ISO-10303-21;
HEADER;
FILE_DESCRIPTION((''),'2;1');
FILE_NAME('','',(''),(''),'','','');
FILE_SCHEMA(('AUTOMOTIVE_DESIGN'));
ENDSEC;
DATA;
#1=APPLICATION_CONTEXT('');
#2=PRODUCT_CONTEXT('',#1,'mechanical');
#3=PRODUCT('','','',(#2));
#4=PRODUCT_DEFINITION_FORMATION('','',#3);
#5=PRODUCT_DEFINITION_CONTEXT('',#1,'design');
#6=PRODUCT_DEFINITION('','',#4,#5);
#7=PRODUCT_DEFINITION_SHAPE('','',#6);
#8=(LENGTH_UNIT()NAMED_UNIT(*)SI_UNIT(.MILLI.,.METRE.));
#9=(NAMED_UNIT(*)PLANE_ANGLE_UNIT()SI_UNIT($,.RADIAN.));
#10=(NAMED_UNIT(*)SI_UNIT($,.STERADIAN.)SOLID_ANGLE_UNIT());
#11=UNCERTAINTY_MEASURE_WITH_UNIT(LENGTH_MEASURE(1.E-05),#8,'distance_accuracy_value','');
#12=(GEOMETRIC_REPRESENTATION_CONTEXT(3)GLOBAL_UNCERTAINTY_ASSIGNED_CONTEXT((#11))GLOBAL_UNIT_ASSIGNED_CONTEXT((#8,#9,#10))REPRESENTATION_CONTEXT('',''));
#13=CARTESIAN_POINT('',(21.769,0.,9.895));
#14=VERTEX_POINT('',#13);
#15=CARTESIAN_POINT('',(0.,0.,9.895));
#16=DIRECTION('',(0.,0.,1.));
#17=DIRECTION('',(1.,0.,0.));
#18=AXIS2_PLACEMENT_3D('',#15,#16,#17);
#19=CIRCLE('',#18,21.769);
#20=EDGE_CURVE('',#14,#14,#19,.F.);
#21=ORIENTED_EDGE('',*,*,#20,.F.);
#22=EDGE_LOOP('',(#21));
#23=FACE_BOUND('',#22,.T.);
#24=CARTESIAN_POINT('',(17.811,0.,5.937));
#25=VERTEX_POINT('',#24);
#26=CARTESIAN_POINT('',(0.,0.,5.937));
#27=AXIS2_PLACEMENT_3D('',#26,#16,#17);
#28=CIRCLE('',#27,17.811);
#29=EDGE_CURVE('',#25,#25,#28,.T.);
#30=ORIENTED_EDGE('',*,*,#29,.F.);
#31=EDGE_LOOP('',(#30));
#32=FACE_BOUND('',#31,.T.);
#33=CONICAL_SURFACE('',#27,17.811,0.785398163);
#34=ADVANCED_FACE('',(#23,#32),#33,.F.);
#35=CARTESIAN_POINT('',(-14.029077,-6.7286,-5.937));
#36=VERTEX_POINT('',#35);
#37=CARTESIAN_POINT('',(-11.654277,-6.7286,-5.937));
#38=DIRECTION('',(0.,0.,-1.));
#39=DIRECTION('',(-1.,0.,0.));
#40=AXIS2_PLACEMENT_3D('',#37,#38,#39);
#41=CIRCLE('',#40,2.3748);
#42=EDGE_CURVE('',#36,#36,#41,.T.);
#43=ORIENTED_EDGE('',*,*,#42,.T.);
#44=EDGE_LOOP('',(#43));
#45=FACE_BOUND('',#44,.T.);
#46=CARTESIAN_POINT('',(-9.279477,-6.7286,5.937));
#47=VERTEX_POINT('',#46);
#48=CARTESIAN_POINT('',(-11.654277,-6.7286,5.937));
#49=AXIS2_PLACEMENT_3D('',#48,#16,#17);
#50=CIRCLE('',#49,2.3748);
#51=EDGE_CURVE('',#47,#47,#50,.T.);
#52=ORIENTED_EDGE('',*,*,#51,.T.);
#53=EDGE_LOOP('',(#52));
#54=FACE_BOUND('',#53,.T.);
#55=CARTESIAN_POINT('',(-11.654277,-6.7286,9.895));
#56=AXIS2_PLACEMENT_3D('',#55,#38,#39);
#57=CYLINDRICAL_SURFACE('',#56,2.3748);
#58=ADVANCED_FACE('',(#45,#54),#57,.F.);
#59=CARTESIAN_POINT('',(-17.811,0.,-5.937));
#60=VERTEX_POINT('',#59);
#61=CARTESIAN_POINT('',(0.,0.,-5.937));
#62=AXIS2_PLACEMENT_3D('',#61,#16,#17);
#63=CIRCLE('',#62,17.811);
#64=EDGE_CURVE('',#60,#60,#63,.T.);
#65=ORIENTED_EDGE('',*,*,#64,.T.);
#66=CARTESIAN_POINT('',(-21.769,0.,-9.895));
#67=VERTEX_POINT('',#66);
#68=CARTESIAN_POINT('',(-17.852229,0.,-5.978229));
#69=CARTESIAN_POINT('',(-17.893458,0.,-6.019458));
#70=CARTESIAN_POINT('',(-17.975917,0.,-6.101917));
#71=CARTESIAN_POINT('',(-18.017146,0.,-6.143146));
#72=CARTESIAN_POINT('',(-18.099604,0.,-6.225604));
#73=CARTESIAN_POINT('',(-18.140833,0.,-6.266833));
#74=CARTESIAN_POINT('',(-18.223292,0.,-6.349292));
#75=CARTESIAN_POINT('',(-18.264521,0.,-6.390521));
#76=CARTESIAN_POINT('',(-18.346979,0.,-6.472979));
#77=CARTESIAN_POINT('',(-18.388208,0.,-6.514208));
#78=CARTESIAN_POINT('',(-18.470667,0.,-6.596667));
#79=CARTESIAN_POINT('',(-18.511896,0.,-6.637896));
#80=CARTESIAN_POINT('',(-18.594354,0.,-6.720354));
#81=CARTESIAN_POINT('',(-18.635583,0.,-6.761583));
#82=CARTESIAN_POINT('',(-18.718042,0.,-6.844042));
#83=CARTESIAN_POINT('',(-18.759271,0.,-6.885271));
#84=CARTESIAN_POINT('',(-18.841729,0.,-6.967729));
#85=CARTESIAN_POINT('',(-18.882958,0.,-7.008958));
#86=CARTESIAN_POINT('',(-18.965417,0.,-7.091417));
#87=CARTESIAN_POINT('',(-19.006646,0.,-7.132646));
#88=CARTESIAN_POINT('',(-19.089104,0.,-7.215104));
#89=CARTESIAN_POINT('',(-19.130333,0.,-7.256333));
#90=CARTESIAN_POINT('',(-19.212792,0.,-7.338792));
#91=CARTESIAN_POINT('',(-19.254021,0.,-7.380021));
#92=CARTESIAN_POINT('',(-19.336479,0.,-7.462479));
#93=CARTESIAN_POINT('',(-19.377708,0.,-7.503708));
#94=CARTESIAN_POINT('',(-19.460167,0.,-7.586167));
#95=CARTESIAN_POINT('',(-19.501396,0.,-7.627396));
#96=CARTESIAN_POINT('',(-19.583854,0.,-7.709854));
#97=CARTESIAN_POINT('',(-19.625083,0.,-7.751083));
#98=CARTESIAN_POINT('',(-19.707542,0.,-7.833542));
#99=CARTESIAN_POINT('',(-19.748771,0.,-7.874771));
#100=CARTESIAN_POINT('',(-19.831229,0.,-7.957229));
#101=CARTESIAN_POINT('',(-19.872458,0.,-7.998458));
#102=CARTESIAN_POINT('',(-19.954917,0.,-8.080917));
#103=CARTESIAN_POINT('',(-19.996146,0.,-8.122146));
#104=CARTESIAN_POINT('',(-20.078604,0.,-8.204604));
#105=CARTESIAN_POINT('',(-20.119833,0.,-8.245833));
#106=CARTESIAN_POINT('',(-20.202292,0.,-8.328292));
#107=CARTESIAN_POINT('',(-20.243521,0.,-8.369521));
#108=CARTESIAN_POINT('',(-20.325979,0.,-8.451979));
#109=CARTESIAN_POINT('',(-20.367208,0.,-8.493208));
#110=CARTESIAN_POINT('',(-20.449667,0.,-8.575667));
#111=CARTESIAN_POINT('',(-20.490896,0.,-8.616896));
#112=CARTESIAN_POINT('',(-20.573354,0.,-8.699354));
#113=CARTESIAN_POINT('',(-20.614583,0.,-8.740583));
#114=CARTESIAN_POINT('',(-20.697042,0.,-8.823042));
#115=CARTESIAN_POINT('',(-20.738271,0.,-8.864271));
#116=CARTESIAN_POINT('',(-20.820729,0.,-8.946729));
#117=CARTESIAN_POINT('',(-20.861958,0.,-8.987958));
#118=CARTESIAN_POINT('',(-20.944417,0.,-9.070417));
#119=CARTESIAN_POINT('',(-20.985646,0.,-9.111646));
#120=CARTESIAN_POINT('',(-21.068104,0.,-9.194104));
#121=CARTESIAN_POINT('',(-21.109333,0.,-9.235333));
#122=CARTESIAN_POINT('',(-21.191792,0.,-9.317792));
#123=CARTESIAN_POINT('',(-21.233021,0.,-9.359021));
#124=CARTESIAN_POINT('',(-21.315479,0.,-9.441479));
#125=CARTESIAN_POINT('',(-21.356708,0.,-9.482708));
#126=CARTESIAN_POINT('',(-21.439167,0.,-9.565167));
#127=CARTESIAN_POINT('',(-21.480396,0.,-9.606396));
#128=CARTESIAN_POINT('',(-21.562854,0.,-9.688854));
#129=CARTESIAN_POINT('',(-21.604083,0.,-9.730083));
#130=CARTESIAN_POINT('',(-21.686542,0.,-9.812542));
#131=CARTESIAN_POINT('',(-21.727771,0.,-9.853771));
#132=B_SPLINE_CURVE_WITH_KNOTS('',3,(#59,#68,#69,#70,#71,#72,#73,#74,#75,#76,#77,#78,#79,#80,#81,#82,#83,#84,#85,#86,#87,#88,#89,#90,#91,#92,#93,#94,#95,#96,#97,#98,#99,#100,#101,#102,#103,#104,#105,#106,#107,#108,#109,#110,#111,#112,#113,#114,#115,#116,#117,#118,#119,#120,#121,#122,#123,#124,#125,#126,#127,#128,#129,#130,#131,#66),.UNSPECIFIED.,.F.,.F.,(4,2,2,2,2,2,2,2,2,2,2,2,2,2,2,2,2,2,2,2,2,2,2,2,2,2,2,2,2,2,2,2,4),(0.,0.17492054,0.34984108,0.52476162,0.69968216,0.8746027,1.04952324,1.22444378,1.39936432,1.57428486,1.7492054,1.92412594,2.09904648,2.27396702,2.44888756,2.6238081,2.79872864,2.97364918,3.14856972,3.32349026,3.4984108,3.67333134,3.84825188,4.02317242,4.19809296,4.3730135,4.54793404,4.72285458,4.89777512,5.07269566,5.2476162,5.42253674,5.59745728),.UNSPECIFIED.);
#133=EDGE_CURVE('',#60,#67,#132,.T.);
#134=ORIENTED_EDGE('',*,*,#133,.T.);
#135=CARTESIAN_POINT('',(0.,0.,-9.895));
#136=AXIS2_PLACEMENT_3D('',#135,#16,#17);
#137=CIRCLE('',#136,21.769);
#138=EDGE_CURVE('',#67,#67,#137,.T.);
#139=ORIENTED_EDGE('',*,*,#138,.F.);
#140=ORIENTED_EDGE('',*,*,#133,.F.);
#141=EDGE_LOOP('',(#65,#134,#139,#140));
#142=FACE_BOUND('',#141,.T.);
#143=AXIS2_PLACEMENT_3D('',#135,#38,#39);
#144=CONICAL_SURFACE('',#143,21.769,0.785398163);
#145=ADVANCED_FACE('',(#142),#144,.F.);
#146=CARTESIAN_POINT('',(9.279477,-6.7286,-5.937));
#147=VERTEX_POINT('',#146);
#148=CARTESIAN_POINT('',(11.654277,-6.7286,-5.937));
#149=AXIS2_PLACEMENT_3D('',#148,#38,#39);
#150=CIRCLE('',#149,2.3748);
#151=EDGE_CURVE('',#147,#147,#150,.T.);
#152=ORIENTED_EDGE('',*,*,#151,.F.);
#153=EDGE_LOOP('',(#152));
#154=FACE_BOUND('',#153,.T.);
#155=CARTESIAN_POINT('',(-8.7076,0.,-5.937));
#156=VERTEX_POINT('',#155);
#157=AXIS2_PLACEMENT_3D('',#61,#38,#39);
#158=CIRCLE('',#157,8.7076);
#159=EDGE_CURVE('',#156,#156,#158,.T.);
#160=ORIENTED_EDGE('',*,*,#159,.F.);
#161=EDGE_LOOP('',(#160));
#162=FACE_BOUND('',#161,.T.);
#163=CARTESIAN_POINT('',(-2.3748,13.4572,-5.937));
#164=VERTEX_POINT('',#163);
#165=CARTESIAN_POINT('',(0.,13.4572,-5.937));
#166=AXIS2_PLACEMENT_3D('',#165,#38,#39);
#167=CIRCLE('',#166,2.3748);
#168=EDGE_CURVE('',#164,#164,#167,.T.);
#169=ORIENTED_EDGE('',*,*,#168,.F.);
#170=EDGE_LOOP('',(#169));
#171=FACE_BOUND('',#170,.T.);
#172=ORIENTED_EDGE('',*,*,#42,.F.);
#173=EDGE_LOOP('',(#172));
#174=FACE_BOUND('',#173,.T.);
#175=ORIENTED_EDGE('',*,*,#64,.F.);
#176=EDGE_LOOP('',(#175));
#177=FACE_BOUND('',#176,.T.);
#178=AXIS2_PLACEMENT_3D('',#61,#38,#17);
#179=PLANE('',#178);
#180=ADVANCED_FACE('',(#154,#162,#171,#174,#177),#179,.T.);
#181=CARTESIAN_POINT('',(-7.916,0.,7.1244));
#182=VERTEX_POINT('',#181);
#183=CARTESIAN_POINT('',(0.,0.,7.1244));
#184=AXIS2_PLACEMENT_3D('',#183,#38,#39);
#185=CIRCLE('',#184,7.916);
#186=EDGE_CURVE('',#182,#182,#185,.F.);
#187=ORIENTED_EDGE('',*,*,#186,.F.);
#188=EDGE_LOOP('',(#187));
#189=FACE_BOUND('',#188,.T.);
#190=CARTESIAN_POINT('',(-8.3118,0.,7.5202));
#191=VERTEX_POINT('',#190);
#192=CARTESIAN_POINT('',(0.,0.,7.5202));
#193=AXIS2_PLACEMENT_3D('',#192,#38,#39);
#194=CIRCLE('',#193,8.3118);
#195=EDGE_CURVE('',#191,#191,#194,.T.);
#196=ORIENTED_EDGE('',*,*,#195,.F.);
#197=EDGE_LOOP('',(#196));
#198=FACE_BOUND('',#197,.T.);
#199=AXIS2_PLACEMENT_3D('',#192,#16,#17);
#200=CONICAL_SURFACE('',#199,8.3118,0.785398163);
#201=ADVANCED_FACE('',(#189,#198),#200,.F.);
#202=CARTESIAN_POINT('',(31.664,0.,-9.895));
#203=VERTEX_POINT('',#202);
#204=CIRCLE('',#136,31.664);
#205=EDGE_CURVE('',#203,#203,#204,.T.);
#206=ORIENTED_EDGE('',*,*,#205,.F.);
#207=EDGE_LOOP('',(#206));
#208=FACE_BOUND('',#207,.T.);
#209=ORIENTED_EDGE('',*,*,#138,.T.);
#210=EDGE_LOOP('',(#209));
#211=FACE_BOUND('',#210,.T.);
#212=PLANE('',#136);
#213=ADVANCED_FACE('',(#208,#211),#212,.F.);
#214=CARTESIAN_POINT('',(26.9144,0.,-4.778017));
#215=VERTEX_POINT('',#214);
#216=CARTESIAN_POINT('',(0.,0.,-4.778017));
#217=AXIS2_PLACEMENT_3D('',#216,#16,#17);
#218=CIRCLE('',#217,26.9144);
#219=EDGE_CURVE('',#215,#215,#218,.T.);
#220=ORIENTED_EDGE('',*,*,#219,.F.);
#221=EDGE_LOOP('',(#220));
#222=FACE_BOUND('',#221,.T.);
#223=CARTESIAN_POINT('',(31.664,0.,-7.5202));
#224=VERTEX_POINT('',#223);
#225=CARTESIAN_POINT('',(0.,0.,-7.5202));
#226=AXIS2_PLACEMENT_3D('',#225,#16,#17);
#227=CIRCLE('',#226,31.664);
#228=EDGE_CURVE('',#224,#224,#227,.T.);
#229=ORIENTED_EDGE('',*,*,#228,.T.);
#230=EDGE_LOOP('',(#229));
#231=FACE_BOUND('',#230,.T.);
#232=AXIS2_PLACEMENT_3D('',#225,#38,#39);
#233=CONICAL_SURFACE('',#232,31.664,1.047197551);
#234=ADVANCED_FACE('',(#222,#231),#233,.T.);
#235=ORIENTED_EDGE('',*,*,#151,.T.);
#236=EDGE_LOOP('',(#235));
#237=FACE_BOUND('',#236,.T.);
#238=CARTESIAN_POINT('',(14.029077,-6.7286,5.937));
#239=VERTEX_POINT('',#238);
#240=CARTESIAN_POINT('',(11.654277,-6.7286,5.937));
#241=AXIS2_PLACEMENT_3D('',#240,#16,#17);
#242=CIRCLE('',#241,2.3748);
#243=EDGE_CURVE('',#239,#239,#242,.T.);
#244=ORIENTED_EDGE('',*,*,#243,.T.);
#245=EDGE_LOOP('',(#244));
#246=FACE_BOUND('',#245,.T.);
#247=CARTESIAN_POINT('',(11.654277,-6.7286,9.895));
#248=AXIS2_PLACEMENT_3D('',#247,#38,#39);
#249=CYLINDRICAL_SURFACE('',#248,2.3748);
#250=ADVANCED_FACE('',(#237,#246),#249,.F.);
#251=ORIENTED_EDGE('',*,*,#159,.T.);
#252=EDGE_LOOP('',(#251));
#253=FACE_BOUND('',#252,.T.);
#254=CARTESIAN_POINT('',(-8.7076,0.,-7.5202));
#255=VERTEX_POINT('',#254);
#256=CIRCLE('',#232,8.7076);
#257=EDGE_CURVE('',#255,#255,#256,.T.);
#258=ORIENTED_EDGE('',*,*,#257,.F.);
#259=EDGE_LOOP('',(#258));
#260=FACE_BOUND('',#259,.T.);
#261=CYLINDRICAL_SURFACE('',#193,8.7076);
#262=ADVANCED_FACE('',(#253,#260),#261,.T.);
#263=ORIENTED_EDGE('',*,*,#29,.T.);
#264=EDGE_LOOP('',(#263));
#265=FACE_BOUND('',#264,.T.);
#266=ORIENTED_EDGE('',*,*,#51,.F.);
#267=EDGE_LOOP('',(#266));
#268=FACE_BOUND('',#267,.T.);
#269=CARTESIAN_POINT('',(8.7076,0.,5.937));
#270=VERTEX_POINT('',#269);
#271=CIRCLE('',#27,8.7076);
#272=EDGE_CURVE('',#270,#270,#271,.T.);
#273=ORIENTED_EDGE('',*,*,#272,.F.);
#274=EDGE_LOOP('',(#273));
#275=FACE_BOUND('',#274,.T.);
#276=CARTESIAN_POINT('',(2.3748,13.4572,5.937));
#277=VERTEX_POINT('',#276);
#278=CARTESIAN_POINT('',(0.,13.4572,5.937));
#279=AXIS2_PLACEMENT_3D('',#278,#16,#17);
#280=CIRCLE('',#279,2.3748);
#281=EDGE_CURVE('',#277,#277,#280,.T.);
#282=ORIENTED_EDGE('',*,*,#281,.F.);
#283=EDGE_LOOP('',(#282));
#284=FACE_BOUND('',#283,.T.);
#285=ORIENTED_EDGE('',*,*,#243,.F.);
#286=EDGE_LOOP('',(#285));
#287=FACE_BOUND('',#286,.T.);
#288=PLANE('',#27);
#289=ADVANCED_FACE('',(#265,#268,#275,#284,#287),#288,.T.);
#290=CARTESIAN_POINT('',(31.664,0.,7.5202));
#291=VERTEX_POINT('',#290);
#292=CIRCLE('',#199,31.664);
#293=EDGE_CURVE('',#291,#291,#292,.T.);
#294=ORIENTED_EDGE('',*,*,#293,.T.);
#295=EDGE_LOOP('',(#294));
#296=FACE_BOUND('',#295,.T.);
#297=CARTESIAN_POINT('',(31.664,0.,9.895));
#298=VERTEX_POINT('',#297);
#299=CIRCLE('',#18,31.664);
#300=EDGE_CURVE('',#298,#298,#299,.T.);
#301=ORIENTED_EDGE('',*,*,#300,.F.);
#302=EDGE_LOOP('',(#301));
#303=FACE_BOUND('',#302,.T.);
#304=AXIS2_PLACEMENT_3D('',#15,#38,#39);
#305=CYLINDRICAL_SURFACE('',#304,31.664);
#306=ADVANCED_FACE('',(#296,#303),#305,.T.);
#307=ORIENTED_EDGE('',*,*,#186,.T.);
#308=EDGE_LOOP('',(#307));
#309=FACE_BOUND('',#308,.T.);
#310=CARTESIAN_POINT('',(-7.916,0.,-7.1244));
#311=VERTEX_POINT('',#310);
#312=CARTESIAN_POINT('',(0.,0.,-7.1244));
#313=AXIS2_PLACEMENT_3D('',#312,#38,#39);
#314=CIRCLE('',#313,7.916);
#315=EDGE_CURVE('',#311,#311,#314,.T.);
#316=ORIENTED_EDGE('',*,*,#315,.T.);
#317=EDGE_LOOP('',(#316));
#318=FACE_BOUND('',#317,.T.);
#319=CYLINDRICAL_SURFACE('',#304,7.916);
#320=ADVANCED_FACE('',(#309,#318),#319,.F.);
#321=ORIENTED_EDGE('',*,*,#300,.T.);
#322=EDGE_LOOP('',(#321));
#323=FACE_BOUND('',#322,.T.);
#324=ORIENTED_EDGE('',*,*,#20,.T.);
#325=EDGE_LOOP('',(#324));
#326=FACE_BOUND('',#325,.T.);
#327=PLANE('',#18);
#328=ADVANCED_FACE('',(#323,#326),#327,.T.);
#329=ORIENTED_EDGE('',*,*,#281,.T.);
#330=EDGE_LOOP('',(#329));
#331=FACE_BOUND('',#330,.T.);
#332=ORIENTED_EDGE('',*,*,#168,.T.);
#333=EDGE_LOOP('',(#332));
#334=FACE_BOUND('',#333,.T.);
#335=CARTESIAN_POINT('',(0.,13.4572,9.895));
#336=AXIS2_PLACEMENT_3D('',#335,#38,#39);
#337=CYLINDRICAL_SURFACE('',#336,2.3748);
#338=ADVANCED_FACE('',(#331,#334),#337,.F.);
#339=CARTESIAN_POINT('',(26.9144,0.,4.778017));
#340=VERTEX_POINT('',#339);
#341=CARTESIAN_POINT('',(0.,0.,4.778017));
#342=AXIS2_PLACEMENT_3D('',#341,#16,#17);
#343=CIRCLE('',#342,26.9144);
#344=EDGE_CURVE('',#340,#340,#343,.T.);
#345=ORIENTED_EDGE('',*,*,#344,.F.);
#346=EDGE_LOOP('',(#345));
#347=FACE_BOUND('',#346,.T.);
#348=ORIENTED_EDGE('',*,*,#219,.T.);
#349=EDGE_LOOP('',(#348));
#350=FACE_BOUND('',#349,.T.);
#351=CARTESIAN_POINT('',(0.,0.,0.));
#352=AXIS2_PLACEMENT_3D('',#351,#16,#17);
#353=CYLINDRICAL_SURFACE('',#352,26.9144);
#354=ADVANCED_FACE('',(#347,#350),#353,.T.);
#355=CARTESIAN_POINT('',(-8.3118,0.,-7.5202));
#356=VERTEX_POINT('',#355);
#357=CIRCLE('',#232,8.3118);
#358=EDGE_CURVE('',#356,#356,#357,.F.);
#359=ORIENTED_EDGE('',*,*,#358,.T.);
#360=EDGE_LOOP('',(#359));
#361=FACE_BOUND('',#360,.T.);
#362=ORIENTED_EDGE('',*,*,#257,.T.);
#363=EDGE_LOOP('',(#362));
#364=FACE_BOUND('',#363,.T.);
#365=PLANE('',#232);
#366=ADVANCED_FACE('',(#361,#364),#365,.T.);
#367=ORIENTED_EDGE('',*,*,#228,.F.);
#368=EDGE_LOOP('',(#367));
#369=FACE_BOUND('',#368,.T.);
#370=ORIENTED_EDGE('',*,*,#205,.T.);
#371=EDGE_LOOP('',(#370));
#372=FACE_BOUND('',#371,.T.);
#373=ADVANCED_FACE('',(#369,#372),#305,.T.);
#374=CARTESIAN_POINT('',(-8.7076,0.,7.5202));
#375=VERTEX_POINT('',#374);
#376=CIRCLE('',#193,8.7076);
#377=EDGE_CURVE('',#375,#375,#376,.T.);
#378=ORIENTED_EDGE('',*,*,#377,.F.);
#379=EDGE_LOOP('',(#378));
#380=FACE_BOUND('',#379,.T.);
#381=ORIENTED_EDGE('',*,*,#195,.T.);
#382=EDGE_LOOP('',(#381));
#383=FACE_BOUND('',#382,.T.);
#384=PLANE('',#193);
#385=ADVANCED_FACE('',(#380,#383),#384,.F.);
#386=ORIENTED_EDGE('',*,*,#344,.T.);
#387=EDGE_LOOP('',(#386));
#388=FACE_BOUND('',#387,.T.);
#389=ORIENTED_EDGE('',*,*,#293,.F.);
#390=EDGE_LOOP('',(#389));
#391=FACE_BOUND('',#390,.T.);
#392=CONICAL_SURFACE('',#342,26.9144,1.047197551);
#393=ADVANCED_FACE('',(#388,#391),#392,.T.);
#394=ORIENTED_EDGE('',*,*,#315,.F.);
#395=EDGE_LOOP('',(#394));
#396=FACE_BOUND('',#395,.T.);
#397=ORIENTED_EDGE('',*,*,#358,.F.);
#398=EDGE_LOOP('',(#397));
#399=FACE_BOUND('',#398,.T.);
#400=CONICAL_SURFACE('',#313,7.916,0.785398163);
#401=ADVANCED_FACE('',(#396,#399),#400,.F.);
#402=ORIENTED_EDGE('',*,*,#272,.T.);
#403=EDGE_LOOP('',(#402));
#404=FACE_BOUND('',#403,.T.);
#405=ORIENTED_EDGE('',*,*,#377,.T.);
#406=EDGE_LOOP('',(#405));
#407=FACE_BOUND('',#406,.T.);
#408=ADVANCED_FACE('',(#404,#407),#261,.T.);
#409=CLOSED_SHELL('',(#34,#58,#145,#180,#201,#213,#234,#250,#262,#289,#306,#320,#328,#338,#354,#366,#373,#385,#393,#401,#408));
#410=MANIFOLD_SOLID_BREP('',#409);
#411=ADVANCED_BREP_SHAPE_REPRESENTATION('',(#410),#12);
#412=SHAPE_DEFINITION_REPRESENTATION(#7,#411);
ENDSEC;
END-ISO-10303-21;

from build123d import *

# Parameters (mm, degrees)
ESQUISSE1_R             = 40
ESQUISSE1_R_2           = 10
BOSS_EXTRU_1_DEPTH      = 12.5
ESQUISSE2_R             = 22.5
ENL_V_MAT_EXTRU_1_DEPTH = 5
CHANFREIN1_SIZE         = 5
ESQUISSE4_R             = 3
ENL_V_MAT_EXTRU_2_DEPTH = 61
BOSS_EXTRU_2_DEPTH      = 2
BOSS_EXTRU_2_DEPTH_BACK = 17
ESQUISSE5_R             = 11
ESQUISSE5_R_2           = 10
CHANFREIN2_SIZE         = 0.5
ESCALA1_SCALE           = 0.7916


with BuildPart() as part:
    # Esquisse1 → Boss.-Extru.1 (new, symmetric)
    with BuildSketch(Plane.XY):
        Circle(ESQUISSE1_R)
        Circle(ESQUISSE1_R_2, mode=Mode.SUBTRACT)
    extrude(amount=BOSS_EXTRU_1_DEPTH, both=True)

    # Esquisse2 → Enlèv. mat.-Extru.1 (cut)
    with BuildSketch(Plane.XY.offset(12.5)):
        Circle(ESQUISSE2_R)
    enl_v_mat_extru_1 = extrude(amount=-ENL_V_MAT_EXTRU_1_DEPTH, mode=Mode.SUBTRACT)

    # Symétrie1: Enlèv. mat.-Extru.1 across plane
    add(enl_v_mat_extru_1.mirror(Plane.XY), mode=Mode.SUBTRACT)

    # Esquisse3 → Enlèvement de matière-Révolution1 (revolve, cut)
    with BuildSketch(Plane(origin=(0, 0, 0), x_dir=(1, 0, 0), z_dir=(0, 1, 0))):
        Polygon((40, 9.5), (34, 6.035898385), (34, -6.035898385), (40, -9.5), align=None)
    revolve(axis=Axis((0, 0, 0), (0, 0, -1)), mode=Mode.SUBTRACT)

    # Chanfrein1
    chanfrein1_edges = [part.edges().sort_by_distance(p)[0] for p in [
        (-22.5, 0, 12.5),
        (-22.5, 0, -12.5),
    ]]
    chamfer(chanfrein1_edges, length=CHANFREIN1_SIZE - 0.0001)  # a hair under: the kernel refuses the full size

    # Esquisse4 → Enlèv. mat.-Extru.2 (cut, through all)
    with BuildSketch(Plane(origin=(0, 0, -7.5), x_dir=(-1, 0, 0), z_dir=(0, 0, -1))):
        with Locations((0, 17)):
            Circle(ESQUISSE4_R)
        with Locations((14.722431864, -8.5)):
            Circle(ESQUISSE4_R)
        with Locations((-14.722431864, -8.5)):
            Circle(ESQUISSE4_R)
    extrude(amount=-ENL_V_MAT_EXTRU_2_DEPTH, mode=Mode.SUBTRACT)

    # Esquisse5 → Boss.-Extru.2 (add, two sides: drawn at the far end of the back side and taken through both)
    with BuildSketch(Plane(origin=(0, 0, -7.5), x_dir=(-1, 0, 0), z_dir=(0, 0, -1)).offset(-BOSS_EXTRU_2_DEPTH_BACK)):
        Circle(ESQUISSE5_R)
        Circle(ESQUISSE5_R_2, mode=Mode.SUBTRACT)
    extrude(amount=BOSS_EXTRU_2_DEPTH + BOSS_EXTRU_2_DEPTH_BACK)

    # Chanfrein2
    chanfrein2_edges = [part.edges().sort_by_distance(p)[0] for p in [
        (10, 0, 9.5),
        (10, 0, -9.5),
    ]]
    chamfer(chanfrein2_edges, length=CHANFREIN2_SIZE)


with BuildPart() as part_1:
    # Escala1: scaled about (0, 0, 0)
    add(part.part.scale(ESCALA1_SCALE))


solid = part_1.part
